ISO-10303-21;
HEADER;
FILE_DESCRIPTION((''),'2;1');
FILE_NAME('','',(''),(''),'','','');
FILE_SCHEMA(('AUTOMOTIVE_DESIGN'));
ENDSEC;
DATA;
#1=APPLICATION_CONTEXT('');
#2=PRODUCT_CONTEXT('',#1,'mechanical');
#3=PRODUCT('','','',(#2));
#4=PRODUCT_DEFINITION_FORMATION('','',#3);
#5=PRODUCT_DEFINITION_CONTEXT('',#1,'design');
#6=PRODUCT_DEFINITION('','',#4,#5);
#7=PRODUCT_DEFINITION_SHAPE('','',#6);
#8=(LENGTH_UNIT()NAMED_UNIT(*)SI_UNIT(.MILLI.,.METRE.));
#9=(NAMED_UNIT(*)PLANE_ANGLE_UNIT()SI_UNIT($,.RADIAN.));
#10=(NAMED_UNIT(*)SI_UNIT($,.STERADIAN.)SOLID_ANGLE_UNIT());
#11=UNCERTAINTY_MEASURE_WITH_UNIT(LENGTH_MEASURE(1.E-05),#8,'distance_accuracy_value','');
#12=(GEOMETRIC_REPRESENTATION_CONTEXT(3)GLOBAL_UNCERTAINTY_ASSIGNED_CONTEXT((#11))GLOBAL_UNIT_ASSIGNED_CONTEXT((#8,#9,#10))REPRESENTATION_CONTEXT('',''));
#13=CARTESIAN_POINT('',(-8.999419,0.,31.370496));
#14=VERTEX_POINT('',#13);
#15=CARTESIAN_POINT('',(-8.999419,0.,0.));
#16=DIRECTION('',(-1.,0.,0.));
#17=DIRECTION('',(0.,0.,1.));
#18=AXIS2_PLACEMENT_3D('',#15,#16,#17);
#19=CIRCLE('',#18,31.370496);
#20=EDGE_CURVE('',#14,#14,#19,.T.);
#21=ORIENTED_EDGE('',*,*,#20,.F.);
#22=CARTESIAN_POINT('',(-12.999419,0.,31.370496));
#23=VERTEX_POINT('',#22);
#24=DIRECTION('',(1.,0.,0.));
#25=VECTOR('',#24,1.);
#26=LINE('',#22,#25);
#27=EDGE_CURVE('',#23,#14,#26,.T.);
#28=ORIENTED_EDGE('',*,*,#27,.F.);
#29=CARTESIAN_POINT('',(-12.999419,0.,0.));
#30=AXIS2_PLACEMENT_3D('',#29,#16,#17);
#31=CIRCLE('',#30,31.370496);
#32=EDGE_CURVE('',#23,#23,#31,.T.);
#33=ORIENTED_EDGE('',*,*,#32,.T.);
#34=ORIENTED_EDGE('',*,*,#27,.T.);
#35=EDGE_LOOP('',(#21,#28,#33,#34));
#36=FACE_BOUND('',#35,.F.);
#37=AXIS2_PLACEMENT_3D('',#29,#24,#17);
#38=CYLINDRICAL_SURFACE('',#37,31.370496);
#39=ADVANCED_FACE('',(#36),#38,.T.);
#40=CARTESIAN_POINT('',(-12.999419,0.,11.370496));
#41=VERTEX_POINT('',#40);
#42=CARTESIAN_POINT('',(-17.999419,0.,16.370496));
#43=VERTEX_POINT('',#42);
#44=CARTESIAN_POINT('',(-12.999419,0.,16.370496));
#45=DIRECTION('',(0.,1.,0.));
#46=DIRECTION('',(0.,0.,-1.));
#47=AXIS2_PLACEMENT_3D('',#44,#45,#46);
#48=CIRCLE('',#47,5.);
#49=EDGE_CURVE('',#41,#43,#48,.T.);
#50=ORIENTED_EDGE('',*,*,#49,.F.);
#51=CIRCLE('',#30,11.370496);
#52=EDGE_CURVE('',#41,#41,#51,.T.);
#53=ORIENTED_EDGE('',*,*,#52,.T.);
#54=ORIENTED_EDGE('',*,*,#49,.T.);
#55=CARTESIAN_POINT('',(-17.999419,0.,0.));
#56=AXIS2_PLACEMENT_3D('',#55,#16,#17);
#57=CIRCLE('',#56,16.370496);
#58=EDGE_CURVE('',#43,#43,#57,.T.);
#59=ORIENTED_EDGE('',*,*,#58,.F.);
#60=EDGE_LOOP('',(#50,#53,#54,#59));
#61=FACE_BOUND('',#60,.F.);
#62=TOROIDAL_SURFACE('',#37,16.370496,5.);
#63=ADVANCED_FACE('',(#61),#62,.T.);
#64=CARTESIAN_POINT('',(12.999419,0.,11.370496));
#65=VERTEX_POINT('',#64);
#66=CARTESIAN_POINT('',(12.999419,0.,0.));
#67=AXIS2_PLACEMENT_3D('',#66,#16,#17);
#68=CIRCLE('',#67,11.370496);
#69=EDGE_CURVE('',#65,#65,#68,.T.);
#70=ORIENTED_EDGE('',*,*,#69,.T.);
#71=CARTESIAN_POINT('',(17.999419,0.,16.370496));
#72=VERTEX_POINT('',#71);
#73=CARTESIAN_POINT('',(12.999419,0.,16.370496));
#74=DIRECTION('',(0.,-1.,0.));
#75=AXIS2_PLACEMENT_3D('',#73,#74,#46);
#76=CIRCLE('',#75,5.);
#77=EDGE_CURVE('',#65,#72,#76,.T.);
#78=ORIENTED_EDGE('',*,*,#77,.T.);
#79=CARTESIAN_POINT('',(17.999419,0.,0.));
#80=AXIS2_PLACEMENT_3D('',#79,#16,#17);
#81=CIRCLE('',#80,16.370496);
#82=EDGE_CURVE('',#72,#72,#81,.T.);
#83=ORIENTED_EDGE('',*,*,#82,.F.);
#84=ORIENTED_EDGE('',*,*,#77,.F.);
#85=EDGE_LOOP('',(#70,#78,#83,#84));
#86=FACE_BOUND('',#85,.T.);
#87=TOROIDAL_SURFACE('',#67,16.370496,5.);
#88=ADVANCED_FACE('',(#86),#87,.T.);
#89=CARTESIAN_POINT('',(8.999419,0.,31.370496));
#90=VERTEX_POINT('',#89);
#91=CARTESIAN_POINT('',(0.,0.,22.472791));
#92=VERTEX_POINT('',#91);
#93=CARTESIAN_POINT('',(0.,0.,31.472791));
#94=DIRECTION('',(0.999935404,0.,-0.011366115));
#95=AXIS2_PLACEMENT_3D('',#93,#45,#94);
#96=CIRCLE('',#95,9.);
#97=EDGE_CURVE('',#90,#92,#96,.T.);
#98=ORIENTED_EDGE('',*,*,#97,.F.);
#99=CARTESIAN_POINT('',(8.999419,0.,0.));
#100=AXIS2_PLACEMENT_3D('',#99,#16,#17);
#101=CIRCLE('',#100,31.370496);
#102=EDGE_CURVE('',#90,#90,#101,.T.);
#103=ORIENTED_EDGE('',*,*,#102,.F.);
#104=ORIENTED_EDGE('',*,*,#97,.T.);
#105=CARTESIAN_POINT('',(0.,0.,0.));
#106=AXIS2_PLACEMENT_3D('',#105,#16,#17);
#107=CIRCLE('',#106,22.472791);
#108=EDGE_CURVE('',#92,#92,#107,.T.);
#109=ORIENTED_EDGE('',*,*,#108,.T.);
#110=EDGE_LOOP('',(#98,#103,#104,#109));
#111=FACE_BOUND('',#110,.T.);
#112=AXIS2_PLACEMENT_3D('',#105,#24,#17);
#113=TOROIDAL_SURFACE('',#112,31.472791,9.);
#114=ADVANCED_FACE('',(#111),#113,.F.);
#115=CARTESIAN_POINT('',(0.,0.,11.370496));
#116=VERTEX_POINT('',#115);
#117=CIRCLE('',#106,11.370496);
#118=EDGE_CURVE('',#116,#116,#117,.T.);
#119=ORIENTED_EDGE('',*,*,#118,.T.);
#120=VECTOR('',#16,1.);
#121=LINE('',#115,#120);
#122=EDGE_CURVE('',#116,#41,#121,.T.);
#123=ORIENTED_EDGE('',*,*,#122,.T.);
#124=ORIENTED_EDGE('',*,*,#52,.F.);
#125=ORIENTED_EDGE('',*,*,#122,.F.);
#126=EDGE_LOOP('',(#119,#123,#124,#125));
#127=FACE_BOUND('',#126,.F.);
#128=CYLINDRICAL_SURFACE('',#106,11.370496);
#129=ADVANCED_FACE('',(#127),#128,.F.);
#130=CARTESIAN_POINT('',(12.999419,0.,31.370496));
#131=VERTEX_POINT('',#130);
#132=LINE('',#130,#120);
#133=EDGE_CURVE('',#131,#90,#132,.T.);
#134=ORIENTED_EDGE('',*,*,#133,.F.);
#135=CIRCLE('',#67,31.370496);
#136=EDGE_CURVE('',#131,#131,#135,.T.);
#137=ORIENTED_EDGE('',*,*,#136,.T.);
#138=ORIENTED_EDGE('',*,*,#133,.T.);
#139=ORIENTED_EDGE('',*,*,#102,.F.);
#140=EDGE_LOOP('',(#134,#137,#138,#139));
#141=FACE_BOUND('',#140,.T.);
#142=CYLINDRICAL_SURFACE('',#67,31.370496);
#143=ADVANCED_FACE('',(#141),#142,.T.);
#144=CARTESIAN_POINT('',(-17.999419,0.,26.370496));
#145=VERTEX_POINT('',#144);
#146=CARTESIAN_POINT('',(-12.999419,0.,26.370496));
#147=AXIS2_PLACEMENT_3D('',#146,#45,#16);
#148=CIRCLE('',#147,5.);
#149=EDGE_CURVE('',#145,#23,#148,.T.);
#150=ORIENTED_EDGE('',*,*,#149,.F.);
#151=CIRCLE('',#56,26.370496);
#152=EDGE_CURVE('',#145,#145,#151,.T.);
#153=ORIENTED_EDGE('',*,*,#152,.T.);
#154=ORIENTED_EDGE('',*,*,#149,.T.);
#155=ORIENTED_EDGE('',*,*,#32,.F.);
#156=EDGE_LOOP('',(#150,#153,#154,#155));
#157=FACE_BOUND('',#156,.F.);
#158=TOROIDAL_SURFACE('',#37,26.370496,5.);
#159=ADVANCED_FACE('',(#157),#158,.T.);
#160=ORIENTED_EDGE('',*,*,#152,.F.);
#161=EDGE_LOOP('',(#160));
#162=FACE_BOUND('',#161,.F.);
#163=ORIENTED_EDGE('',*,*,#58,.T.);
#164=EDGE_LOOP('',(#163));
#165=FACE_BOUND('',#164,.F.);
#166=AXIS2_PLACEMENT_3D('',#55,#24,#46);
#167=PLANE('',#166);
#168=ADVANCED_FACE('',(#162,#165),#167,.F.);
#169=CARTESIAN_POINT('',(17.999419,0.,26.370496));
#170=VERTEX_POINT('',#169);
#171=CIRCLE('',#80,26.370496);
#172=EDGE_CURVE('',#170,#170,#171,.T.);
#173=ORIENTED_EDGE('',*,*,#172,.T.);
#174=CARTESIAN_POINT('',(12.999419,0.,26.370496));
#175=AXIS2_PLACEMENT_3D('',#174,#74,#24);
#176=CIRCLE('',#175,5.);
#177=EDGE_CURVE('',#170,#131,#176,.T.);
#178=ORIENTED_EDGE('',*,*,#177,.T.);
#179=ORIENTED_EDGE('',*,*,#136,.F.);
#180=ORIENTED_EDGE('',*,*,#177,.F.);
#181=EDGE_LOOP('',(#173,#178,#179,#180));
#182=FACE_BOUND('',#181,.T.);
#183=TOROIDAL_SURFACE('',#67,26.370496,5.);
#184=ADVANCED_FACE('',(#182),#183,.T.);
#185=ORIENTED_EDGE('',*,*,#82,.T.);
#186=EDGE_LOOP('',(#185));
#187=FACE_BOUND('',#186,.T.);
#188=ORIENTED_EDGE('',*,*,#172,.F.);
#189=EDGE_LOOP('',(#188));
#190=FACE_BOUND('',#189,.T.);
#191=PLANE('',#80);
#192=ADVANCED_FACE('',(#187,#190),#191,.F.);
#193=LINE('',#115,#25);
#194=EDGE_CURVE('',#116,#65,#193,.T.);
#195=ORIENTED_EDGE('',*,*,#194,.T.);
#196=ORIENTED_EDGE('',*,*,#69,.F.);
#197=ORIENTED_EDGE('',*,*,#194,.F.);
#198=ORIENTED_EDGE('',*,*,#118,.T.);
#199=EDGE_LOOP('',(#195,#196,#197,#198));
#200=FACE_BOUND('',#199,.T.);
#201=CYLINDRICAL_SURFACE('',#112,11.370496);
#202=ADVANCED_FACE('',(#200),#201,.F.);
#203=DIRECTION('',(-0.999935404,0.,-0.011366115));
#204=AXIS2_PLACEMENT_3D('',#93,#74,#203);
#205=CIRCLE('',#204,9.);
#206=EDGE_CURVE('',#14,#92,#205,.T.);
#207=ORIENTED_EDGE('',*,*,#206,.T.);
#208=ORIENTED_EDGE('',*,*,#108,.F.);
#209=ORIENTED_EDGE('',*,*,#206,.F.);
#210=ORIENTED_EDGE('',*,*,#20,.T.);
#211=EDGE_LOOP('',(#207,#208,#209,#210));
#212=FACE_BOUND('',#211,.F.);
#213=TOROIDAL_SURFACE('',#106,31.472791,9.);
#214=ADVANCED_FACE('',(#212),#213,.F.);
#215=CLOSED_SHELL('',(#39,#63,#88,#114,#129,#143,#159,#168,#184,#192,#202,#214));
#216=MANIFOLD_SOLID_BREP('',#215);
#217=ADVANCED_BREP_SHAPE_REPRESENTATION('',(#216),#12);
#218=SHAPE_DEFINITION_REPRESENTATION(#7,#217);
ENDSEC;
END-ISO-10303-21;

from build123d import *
from build123d import SkipClean  # not in build123d's __all__


# Not quite as in the source:
# - a feature of the source that left no trace in its solid (it failed there, or was rolled back) is left out
# - the program builds the solid bodies; features that only make, move or delete a surface that nothing else refers to are left out


with BuildPart() as f3:
    # F2 (on Front) → F3 (revolve)
    with BuildSketch(Plane.XZ):
        with BuildLine():
            ThreePointArc((8.9994186326, 31.3704956104), (6.3276909161, 25.0727650489), (0, 22.4727906481))
            Line((0, 22.4727906481), (0, 11.3704956104))
            Line((0, 11.3704956104), (12.9994186326, 11.3704956104))
            ThreePointArc((12.9994186326, 11.3704956104), (16.5349525386, 12.8349617044), (17.9994186326, 16.3704956104))
            Line((17.9994186326, 16.3704956104), (17.9994186326, 26.3704956104))
            ThreePointArc((17.9994186326, 26.3704956104), (16.5349525386, 29.9060295163), (12.9994186326, 31.3704956104))
            Line((12.9994186326, 31.3704956104), (8.9994186326, 31.3704956104))
        make_face()
    revolve(axis=Axis((1.0410054399, 0, 0), (-1, 0, 0)))

    # F0: F3 across plane


with BuildPart() as f3_1:
    add(f3.part, clean=False)
    with SkipClean():  # cleaning this boolean's faces spoils the solid; the shape is the same uncleaned
        add(f3.part.mirror(Plane.YZ), clean=False)


solid = f3_1.part
